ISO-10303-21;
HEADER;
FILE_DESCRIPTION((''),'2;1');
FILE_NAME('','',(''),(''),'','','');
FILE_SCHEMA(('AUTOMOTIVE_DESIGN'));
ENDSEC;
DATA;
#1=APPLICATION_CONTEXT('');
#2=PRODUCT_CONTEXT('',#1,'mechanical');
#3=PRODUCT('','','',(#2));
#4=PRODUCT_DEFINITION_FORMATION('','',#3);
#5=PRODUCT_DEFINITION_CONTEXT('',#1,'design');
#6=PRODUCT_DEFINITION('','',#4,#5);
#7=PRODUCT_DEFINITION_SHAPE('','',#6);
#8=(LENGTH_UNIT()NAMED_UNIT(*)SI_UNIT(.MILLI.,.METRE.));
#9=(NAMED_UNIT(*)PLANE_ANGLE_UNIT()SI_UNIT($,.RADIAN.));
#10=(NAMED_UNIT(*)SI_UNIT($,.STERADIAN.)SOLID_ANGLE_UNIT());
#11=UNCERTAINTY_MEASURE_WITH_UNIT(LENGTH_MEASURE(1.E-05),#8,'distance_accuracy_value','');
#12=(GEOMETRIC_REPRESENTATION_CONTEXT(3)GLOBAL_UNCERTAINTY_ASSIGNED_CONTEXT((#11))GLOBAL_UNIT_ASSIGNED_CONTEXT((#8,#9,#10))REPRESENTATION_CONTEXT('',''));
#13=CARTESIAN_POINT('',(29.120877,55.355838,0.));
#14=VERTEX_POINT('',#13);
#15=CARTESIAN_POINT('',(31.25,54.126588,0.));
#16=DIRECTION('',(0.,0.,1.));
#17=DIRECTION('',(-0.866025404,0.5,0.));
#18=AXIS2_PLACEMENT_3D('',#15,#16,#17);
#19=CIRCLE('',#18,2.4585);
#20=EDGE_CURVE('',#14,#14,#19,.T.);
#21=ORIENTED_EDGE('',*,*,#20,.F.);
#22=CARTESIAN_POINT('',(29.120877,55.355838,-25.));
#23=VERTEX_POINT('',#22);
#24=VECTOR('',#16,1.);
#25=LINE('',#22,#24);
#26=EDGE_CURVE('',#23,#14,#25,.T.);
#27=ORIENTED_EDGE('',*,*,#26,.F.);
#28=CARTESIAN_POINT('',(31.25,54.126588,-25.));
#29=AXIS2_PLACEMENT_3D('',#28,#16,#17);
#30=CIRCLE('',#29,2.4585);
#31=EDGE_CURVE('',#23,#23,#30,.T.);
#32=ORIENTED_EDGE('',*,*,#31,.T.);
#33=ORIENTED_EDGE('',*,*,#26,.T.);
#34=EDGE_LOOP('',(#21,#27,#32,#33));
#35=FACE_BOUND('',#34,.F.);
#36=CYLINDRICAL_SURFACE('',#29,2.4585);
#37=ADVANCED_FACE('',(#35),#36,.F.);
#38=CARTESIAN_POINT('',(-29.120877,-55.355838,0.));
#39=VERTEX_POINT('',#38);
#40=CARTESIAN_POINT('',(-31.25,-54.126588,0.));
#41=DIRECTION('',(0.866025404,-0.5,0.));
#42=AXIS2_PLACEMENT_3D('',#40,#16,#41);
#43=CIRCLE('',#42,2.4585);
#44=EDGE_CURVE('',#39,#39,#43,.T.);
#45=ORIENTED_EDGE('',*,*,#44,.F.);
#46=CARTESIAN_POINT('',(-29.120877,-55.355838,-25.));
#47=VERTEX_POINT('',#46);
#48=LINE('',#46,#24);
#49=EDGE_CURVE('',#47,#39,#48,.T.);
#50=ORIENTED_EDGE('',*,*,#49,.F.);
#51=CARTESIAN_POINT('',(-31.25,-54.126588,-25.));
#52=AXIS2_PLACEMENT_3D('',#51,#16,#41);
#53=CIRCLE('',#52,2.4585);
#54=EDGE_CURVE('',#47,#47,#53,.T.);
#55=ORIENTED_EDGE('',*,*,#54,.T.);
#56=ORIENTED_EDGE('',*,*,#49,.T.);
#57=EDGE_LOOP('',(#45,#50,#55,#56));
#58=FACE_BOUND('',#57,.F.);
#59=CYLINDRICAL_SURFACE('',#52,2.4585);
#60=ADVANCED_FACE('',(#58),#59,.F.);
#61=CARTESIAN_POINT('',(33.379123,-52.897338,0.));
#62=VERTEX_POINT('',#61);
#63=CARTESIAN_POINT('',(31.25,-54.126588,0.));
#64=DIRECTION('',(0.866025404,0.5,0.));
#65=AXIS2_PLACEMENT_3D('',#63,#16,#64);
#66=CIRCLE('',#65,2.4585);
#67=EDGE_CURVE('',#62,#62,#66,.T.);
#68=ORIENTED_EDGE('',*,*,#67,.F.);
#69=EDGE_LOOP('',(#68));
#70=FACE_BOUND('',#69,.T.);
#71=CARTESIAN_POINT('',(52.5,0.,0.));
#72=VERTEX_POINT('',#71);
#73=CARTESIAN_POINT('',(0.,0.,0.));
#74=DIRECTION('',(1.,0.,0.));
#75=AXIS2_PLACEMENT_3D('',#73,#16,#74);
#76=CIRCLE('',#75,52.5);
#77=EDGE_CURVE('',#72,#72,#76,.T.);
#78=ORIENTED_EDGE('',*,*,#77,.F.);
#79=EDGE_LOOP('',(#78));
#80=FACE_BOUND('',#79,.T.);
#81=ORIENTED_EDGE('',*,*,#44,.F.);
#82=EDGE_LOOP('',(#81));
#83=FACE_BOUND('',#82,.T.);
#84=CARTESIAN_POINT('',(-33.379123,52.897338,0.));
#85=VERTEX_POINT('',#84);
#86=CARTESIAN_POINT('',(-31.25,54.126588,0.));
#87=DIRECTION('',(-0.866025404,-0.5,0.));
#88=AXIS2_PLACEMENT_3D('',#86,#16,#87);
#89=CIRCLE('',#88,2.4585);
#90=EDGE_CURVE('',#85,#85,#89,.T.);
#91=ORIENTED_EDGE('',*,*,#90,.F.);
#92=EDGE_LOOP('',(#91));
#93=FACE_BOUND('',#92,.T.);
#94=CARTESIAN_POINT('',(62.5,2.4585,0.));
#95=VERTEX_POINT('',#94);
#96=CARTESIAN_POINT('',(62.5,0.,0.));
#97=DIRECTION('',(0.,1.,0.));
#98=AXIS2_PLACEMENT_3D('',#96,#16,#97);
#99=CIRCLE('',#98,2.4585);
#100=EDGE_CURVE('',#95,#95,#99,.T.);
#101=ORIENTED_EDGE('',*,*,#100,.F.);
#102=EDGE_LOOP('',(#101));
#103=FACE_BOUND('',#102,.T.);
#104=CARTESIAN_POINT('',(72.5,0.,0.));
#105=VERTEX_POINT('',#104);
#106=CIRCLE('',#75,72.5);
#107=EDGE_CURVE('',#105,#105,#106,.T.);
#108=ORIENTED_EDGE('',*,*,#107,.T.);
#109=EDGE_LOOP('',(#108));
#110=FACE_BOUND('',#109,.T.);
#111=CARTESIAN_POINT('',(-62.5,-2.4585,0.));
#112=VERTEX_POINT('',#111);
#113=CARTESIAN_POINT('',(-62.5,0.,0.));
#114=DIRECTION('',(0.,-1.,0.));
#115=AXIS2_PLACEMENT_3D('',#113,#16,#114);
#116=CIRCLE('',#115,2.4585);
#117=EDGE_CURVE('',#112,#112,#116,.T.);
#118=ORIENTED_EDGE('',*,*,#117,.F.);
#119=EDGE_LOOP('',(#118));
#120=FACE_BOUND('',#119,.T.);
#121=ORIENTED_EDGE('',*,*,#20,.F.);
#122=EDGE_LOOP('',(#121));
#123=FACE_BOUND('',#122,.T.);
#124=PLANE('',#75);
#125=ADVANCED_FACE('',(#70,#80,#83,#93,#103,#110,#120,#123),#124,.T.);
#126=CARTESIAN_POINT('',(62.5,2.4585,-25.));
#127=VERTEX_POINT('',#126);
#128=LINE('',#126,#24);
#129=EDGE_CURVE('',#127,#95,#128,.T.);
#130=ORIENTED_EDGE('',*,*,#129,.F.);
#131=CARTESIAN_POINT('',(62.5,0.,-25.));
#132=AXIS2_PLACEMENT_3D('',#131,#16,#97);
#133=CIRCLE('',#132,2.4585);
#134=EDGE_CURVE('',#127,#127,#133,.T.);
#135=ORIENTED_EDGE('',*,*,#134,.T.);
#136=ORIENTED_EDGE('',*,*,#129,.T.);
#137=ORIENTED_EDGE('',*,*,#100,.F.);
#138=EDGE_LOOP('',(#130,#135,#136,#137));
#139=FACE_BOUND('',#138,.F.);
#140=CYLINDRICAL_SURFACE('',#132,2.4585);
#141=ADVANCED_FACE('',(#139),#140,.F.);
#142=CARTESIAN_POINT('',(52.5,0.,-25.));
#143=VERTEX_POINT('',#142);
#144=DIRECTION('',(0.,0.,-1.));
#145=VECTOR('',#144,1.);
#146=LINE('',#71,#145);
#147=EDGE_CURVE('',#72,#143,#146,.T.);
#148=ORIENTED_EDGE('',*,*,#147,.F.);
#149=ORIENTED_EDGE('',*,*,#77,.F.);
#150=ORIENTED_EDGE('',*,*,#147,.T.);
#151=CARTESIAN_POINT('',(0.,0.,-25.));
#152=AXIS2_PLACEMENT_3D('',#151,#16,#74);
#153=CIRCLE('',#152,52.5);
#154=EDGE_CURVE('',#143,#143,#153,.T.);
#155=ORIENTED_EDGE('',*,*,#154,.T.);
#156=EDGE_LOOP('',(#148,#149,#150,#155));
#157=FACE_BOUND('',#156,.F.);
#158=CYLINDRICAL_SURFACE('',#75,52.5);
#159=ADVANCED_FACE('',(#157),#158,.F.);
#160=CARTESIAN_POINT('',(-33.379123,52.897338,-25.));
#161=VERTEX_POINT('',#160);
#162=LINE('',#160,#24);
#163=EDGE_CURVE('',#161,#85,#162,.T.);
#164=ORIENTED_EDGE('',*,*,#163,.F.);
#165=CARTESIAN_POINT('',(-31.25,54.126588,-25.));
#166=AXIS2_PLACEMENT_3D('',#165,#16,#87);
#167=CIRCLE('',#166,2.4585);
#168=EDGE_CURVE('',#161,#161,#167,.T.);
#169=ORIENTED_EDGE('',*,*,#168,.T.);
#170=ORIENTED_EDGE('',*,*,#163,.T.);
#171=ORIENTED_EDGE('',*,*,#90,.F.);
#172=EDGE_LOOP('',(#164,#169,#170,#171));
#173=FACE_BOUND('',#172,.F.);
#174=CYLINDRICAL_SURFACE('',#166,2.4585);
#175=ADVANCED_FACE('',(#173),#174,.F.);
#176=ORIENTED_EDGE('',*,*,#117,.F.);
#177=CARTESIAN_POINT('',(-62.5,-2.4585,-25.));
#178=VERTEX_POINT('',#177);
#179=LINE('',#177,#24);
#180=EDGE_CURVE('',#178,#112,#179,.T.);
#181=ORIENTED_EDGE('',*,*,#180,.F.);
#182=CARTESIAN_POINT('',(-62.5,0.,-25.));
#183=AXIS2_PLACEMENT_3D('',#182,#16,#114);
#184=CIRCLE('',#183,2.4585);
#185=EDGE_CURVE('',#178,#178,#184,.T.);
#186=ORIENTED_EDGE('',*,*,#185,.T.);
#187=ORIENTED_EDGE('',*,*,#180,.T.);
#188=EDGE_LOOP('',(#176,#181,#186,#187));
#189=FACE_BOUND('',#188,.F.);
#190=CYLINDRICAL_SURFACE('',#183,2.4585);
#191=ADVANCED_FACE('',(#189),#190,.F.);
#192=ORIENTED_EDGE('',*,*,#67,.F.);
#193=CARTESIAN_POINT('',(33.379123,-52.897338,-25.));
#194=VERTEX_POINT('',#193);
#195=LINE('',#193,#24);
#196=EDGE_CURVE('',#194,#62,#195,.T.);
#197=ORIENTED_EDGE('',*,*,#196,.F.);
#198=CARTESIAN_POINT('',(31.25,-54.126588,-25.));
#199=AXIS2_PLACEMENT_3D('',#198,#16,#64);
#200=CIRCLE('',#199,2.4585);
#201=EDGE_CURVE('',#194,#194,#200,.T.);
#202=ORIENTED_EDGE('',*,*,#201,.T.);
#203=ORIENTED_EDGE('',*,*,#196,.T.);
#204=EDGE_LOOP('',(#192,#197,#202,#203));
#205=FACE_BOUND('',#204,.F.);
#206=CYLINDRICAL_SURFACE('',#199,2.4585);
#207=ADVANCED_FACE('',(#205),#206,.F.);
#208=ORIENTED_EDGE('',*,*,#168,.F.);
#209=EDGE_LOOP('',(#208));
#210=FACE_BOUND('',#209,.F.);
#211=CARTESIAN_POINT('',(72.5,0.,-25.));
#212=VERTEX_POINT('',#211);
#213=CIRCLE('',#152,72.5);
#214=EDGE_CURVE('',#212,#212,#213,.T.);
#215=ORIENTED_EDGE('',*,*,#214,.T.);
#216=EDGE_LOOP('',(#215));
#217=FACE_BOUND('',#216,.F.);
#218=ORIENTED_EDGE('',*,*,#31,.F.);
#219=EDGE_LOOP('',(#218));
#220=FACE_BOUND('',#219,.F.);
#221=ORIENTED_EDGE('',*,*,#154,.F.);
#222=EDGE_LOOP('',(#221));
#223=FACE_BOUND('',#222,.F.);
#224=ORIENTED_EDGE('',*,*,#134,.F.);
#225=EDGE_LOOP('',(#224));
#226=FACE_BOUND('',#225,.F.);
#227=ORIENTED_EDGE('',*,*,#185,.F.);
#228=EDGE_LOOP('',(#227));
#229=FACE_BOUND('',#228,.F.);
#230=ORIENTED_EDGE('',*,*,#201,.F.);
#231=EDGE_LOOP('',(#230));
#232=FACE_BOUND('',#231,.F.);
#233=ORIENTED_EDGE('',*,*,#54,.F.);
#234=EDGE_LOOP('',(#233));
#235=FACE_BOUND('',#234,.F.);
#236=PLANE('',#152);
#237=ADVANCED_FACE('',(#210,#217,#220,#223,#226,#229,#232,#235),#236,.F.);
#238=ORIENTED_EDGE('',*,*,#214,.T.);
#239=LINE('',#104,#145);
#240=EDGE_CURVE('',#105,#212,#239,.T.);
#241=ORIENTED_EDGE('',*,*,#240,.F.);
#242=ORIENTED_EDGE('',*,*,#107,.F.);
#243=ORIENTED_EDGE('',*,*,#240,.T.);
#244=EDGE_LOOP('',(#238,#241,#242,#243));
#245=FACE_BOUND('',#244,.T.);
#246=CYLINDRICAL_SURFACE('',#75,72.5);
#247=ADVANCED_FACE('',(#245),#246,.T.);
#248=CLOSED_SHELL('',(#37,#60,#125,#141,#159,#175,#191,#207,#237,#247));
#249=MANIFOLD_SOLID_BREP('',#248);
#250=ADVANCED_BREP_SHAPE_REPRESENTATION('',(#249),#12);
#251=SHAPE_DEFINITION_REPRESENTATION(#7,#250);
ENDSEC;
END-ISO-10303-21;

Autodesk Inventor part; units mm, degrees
ref_plane "YZ Plane" through (0, 0, 0) normal (1, 0, 0) x (0, 1, 0)
ref_plane "XZ Plane" through (0, 0, 0) normal (0, 1, 0) x (-1, 0, 0)
ref_plane "Płaszczyzna konstrukcyjna1" through (0, 0, 0) normal (0, 0, 1) x (1, 0, 0)
sketch "Szkic1" plane through (0, 0, 0) normal (0, 0, 1) x (1, 0, 0)
  circle A0 centre (0, 0) radius 72.5 projected
  circle A1 centre (0, 0) radius 52.5 projected
extrude "Wyciągnięcie proste1" add sketch "Szkic1" against normal blind 25
sketch "Szkic2" plane through (0, 0, -25) normal (0, 0, -1) x (-1, 0, 0)
  circle A0 centre (0, 0) radius 52.5 projected
  line L0 (-52.5, 0) -> (-72.5, 0)
  circle A1 centre (0, 0) radius 72.5 projected
  circle A2 centre (-62.5, 0) radius 3
  dimension "d2" = 20
  dimension "d3" = 6
hole "Otwór1" at (62.5, 0, -25) direction (0, 0, 1) diameter 4.917 end through all thread size "M6x1" class "6H" standard "ISO Metric profile"
pattern_circular "Szyk kołowy1" count 6 over 360 about axis through (0, 0, -10) along (0, 0, 1) of "Otwór1"
properties material "Stal nierdzewna"
